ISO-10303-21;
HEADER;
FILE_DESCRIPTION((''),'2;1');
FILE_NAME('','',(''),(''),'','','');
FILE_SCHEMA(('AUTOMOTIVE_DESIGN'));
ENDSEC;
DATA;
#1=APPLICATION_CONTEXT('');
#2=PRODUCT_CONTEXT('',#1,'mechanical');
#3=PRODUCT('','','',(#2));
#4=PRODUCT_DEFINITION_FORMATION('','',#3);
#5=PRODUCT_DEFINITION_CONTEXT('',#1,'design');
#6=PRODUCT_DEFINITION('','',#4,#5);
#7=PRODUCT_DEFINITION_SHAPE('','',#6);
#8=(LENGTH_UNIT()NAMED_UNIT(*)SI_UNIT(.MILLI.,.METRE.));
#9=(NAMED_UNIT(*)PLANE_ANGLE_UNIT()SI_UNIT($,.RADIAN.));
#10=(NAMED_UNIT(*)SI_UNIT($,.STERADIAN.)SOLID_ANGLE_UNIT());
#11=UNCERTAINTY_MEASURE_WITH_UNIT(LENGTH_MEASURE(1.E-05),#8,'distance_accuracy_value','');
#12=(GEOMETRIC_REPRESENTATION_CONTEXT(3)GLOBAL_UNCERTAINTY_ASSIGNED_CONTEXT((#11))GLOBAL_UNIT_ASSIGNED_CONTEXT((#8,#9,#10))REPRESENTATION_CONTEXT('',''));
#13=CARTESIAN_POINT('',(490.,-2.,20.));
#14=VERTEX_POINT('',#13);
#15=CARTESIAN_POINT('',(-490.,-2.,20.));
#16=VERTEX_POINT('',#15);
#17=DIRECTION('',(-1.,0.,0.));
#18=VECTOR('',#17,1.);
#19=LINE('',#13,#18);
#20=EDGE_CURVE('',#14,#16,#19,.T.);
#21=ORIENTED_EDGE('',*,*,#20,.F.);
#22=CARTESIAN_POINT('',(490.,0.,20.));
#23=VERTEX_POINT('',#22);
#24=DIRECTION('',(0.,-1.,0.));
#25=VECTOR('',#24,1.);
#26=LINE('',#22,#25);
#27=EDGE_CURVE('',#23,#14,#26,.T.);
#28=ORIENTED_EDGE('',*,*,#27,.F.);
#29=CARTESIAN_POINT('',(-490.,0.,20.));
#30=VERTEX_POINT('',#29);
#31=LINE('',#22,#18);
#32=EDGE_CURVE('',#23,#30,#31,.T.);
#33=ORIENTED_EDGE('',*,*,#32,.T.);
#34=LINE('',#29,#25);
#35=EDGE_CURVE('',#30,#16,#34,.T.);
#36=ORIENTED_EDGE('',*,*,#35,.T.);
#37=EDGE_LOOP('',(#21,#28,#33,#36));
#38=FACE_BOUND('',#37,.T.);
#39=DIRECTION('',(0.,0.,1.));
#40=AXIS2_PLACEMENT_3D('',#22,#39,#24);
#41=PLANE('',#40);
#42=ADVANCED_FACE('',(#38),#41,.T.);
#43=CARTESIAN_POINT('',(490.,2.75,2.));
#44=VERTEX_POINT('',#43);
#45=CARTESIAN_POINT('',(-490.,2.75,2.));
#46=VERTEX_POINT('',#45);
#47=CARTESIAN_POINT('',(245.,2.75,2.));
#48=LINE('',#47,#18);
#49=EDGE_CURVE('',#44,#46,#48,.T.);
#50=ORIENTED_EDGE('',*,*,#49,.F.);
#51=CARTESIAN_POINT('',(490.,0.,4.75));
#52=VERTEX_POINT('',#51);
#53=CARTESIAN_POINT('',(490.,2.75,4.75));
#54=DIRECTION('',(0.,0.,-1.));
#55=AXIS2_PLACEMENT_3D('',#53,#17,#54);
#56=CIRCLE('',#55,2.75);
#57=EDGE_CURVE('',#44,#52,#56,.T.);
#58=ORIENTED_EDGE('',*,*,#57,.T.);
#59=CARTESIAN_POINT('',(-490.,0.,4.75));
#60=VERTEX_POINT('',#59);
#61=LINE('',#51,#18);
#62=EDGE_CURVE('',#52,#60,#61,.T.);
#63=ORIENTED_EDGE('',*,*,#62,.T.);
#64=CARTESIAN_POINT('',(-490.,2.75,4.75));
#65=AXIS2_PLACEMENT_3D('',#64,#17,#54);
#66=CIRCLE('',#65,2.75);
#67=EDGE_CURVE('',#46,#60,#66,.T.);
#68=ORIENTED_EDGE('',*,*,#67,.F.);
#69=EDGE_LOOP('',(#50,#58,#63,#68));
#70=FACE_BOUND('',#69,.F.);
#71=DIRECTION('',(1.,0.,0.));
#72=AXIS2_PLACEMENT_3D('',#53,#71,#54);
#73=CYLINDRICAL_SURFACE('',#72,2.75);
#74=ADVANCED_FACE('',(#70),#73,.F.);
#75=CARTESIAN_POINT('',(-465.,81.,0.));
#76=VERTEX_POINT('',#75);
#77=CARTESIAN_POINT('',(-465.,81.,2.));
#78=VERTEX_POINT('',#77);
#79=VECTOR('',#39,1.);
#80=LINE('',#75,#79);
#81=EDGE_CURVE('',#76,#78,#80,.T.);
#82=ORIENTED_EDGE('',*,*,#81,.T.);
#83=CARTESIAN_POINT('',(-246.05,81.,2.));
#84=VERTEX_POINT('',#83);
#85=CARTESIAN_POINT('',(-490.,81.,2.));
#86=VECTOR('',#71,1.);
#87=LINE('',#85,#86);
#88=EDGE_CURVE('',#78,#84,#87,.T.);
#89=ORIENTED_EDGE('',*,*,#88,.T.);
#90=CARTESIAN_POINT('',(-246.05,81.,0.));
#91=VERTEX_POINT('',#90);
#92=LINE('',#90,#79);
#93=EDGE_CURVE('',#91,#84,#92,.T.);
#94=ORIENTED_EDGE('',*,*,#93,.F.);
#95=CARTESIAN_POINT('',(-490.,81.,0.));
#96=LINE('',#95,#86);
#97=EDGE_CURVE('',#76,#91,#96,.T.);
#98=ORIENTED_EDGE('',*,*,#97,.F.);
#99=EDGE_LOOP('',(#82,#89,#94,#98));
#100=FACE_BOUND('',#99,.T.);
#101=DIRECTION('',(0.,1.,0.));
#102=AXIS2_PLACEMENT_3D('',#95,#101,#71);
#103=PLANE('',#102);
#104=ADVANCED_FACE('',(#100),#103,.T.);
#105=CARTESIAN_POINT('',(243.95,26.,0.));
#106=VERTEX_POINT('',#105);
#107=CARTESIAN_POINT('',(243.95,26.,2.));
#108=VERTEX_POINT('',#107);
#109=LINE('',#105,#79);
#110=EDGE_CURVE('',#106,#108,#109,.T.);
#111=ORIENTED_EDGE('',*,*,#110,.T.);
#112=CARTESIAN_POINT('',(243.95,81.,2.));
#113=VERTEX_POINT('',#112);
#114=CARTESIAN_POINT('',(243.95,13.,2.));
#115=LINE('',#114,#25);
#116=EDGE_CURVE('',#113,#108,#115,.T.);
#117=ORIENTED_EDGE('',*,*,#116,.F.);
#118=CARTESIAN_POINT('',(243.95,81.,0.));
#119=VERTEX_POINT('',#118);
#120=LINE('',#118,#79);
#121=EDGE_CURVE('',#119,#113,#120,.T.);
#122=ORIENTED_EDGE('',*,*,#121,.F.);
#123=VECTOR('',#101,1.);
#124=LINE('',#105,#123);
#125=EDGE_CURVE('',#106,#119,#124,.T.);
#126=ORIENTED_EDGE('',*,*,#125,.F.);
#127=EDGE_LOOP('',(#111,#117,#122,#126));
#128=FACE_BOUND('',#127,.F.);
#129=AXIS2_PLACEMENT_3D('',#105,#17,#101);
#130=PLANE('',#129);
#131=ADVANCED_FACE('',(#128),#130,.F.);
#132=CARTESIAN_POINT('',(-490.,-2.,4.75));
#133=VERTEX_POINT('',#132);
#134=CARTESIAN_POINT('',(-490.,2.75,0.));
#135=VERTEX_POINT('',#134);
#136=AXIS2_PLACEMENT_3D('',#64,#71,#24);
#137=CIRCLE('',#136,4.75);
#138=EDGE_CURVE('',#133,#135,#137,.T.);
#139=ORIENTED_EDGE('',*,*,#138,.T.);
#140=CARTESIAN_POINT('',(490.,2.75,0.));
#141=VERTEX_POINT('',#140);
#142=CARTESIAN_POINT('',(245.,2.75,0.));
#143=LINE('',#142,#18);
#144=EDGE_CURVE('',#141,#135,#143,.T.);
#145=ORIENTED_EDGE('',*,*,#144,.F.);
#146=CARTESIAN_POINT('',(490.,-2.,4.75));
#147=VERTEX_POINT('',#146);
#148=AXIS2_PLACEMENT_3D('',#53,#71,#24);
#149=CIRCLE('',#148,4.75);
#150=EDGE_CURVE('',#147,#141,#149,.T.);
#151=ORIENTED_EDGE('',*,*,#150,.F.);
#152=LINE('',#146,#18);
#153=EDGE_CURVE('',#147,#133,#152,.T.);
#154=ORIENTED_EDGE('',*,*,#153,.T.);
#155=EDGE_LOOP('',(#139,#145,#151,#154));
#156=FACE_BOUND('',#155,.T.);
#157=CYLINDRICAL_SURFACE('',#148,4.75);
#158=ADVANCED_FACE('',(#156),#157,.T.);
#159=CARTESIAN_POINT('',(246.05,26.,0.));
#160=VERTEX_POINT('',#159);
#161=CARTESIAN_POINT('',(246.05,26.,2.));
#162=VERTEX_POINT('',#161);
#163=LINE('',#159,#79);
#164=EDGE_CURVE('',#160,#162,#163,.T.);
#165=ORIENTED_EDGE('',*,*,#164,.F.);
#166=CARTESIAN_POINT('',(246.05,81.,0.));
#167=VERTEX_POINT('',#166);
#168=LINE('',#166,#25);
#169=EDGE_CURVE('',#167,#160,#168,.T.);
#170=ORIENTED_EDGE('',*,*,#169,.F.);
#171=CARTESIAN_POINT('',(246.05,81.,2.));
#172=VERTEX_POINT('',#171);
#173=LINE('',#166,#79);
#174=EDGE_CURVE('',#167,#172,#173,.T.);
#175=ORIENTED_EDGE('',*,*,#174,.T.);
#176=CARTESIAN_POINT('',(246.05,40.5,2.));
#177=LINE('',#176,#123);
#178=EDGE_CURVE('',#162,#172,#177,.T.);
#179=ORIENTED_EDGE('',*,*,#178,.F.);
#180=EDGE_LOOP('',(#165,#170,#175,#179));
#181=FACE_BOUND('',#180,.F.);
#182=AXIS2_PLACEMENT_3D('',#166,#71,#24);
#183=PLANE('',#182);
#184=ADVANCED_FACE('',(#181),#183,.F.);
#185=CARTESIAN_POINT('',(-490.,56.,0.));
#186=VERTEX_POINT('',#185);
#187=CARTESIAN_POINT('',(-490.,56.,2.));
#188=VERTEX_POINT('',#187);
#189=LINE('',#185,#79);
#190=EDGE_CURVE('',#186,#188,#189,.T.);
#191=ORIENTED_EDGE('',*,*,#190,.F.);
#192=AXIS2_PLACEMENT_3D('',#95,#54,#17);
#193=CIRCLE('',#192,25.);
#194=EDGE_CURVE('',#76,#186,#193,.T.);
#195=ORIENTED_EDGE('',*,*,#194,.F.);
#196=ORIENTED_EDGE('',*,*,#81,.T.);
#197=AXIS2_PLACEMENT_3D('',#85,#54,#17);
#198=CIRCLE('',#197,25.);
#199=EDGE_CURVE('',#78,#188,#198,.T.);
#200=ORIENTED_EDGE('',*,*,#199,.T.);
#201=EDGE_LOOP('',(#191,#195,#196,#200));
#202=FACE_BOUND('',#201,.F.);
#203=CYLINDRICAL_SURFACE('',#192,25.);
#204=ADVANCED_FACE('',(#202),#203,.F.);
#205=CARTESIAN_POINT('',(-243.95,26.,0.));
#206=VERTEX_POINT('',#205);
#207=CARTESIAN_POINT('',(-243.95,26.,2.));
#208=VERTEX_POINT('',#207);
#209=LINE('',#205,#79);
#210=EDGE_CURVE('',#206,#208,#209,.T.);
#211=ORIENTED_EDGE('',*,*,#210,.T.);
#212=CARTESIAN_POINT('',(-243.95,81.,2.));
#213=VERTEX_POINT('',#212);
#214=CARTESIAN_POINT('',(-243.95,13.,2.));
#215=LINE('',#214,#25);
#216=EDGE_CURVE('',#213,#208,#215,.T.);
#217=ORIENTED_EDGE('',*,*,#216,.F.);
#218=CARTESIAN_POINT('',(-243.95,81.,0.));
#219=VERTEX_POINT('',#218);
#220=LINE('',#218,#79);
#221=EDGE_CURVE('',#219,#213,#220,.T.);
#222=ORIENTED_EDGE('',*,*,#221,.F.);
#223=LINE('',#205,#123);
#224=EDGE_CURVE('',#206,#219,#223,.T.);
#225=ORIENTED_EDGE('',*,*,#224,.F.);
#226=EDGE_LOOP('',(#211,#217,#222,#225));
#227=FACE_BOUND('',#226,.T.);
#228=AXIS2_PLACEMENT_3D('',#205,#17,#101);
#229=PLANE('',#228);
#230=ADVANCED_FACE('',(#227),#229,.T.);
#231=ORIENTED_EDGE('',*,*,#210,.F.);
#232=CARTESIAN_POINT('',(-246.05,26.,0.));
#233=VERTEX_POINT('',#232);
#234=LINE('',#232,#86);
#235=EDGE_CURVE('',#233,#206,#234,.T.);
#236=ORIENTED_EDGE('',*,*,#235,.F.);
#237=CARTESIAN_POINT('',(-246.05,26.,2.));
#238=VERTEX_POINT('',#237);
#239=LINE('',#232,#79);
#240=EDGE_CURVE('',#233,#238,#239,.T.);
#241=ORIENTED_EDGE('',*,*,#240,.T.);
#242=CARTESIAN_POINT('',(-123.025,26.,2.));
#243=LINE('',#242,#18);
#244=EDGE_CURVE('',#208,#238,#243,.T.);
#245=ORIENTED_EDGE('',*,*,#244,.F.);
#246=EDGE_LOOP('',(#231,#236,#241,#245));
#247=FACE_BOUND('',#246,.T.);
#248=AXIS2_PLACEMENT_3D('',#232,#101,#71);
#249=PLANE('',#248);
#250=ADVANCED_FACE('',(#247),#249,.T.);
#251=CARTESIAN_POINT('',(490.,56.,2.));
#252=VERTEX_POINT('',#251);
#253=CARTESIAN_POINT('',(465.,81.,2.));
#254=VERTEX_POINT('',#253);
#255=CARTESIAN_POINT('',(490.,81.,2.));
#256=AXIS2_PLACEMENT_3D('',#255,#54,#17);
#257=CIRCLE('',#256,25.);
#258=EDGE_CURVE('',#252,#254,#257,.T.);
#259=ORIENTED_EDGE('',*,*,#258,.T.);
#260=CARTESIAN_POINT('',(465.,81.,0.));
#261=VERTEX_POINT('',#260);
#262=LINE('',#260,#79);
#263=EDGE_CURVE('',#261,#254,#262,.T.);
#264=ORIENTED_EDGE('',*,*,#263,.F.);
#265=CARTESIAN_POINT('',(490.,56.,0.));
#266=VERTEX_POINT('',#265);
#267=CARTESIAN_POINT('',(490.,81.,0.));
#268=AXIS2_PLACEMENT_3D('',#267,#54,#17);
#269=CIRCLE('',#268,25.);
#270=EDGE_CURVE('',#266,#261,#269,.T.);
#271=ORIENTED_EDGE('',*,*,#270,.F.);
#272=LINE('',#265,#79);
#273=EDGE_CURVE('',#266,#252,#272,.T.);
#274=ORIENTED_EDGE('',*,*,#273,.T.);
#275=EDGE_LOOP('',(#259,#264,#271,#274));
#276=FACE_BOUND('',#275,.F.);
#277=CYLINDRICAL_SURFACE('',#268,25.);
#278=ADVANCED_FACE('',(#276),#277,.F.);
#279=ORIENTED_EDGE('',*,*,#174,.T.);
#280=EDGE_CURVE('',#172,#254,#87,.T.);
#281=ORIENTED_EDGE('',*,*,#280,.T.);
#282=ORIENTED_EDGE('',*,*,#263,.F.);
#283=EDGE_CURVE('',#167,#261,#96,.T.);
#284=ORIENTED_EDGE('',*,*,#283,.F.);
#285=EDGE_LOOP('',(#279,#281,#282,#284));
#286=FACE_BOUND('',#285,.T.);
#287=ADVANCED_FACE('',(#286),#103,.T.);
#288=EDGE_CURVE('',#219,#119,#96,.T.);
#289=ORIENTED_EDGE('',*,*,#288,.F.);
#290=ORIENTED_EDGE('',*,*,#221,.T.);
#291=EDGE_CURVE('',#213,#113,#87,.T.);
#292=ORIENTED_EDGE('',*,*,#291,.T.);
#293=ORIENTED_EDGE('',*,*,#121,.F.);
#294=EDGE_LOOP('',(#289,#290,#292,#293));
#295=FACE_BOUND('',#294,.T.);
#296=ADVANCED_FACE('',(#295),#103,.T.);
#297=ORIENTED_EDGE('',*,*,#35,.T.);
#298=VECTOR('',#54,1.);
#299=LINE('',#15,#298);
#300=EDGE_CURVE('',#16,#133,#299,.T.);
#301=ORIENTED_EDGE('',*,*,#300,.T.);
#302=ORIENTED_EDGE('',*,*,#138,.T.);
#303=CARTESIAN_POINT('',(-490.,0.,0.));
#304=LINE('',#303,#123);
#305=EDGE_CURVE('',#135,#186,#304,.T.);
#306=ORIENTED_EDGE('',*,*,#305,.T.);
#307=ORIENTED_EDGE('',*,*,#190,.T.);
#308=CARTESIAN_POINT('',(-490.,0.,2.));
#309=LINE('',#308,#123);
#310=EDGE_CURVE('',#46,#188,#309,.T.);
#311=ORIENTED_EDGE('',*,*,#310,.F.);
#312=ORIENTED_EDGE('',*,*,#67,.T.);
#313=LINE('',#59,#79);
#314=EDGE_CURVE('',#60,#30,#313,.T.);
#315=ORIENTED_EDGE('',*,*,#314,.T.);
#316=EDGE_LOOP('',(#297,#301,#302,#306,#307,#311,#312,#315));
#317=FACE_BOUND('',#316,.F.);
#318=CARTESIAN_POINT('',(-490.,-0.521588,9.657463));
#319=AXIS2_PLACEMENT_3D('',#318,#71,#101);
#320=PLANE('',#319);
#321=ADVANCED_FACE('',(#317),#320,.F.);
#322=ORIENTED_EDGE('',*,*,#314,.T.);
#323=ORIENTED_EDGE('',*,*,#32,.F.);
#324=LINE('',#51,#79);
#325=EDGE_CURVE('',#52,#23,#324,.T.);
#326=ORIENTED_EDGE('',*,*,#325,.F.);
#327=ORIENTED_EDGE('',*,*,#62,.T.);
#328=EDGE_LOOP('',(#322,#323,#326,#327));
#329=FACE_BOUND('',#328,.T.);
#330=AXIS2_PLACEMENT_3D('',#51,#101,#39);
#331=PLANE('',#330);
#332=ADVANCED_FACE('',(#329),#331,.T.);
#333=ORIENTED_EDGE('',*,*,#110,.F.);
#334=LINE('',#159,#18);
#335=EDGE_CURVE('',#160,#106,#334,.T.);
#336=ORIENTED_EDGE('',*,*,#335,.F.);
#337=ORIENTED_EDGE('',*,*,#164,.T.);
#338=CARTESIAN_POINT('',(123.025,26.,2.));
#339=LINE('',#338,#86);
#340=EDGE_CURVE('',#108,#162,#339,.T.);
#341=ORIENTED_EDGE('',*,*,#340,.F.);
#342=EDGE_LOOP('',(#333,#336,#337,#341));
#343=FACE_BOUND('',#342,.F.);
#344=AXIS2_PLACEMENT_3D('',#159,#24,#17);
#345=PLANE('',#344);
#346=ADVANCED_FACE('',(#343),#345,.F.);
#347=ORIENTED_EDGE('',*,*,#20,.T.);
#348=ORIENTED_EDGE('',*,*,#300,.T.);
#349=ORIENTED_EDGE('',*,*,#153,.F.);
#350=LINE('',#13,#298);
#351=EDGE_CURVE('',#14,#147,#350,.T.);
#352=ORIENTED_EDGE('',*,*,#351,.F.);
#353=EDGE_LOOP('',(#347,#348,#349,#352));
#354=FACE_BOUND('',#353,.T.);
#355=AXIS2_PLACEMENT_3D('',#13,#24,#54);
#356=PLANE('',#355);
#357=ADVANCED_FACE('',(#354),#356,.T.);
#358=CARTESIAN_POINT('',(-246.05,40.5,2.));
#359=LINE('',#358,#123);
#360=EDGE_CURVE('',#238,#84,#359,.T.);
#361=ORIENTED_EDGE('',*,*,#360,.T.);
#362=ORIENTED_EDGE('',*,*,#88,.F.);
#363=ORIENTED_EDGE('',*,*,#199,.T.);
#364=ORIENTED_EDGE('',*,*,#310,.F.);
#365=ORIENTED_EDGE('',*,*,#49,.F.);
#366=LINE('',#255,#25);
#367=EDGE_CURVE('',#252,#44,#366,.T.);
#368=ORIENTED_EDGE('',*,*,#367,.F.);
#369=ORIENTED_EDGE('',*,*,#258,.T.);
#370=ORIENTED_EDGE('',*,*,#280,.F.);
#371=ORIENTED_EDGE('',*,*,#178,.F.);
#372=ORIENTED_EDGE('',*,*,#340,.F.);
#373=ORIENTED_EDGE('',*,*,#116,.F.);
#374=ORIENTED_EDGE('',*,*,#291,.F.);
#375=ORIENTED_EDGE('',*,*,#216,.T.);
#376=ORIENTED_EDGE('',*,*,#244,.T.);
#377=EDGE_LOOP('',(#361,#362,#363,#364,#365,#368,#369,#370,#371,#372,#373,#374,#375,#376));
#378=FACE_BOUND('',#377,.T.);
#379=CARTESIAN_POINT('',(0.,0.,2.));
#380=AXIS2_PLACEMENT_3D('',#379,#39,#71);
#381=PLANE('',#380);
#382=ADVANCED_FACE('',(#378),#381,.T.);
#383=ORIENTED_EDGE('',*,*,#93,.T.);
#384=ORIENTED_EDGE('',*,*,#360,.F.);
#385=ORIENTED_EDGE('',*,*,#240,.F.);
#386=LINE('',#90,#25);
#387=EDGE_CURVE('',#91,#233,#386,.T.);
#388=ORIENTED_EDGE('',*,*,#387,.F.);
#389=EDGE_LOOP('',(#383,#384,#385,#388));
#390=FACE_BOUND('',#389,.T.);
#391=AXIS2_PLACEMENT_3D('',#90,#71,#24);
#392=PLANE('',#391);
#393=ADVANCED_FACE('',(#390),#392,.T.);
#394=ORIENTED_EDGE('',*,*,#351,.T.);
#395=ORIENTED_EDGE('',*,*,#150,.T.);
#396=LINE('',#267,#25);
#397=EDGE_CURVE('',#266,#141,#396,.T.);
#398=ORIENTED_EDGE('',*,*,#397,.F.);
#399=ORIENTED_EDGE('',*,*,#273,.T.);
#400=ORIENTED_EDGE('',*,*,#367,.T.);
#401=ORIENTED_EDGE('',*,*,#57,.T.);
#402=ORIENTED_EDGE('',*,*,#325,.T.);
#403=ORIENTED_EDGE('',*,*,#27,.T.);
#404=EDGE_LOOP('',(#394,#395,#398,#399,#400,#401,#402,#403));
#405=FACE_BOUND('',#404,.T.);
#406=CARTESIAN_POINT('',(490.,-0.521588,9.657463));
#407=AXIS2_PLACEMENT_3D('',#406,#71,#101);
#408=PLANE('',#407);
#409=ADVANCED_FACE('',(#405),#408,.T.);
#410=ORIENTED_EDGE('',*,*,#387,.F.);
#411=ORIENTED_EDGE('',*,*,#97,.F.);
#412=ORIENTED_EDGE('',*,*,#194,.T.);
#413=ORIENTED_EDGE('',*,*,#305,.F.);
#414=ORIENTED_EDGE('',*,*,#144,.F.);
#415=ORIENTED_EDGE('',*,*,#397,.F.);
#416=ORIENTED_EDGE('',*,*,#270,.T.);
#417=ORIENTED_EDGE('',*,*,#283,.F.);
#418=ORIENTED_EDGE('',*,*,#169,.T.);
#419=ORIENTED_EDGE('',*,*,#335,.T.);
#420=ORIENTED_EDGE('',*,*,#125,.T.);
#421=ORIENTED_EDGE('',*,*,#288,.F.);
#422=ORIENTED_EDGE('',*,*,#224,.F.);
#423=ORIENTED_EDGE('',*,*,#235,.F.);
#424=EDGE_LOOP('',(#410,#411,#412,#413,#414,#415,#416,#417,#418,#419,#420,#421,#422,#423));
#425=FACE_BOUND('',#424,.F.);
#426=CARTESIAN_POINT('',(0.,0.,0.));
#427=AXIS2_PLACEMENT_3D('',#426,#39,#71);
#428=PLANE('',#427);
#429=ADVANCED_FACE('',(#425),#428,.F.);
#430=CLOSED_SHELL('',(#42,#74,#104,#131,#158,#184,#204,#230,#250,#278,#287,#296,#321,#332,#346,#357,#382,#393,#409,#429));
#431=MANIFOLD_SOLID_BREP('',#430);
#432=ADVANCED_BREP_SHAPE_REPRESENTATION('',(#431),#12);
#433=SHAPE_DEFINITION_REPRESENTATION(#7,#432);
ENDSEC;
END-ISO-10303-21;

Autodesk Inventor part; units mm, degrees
ref_plane "YZ Plane" through (0, 0, 0) normal (1, 0, 0) x (0, 1, 0)
ref_plane "XZ Plane" through (0, 0, 0) normal (0, 1, 0) x (-1, 0, 0)
ref_plane "XY Plane" through (0, 0, 0) normal (0, 0, 1) x (1, 0, 0)
sketch "Sketch1" plane through (0, 0, 0) normal (0, 0, 1) x (1, 0, 0)
  line L0 (-490, 81) -> (490, 81)
  line L1 (490, 81) -> (490, 0)
  line L2 (490, 0) -> (-490, 0)
  line L3 (-490, 0) -> (-490, 81)
  point P0 (0, 0)
  point P1 (0, 0)
  dimension "d0" = 980
  dimension "d1" = 81
extrude "Plate1" add sketch "Sketch1" along normal blind 2
sketch "Sketch2" plane through (490, -2, 0) normal (0, 1, 0) x (-1, 0, 0)
  line L0 (980, 0) -> (0, 0)
  line L1 (0, 0) -> (0, 20)
  line L2 (0, 20) -> (980, 20)
  line L3 (980, 20) -> (980, 0)
edge flange "Flange1" height 20 angle 90 thickness 2 bend radius 2.75 thickness toward (0, 1, 0) relief round relief width 2 relief depth 1 edges at (0, 0, 2) wall of the first edge with corners at (-490, -2, 0) (490, -2, 0) (490, -2, 20) (-490, -2, 20)
bend "Bend1"
corner "Corner1"
sketch "Sketch5" plane through (0, 0, 0) normal (0, 0, -1) x (-1, 0, 0)
  line L0 (490, 81) -> (-490, 81) projected
  line L1 (490, -2) -> (-490, -2) projected
  circle A0 centre (0, 81) radius 25
  line L2 (243.95, 81) -> (246.05, 81)
  line L3 (246.05, 81) -> (246.05, 26)
  line L4 (246.05, 26) -> (243.95, 26)
  line L5 (243.95, 26) -> (243.95, 81)
  line L6 (-243.95, 81) -> (-246.05, 81)
  line L7 (-246.05, 81) -> (-246.05, 26)
  line L8 (-246.05, 26) -> (-243.95, 26)
  line L9 (-243.95, 26) -> (-243.95, 81)
  line L10 (0, 81) -> (0, -2) construction
  line L11 (-490, -2) -> (-490, 81)
  line L12 (490, -2) -> (490, 81)
  circle A1 centre (-490, 81) radius 25
  circle A2 centre (490, 81) radius 25
  point P0 (0, 0)
  point P1 (245, 26)
  point P2 (-245, 26)
  point P3 (246.05, 81)
  point P4 (-25, 81)
  point P5 (25, 81)
  point P6 (-246.05, 81)
  point P7 (465, 81)
  point P8 (490, 56)
  point P9 (-490, 56)
  point P10 (-465, 81)
  dimension "d45" = 50
  dimension "d48" = 2.1
  dimension "d49" = 490
  dimension "d51" = 28
  dimension "d52" = 55
extrude "Extrusion1" cut sketch "Sketch5" against normal through all contours L3 L4 L5 L0 | L0 L12 A2 | L9 L8 L7 L0 | L11 L0 A1 picked at (488.1457, 64.5423) picked at (-481.1886, 66.9767)
sketch "Sketch9" plane through (0, 0, 2) normal (0, 0, 1) x (1, 0, 0)
  line L0 (467.0539, 27.7998) -> (467.0539, 15.7998) construction
  line L1 (467.0539, 15.7998) -> (267.0539, 15.7998) construction
  line L2 (267.0539, 15.7998) -> (267.0539, 27.7998) construction
  line L3 (267.0539, 27.7998) -> (467.0539, 27.7998) construction
  line L4 (-490, 81) -> (490, 81) projected
  point P0 (0, 0)
  point P1 (1.05, 68)
  point P2 (490, 81)
  point P3 (-490, 81)
  dimension "d40" = 200
  dimension "d41" = 12
mark "Mark2"
equation "\"d2\" = Thickness"
equation "\"d3\" = BendReliefWidth"
equation "\"d4\" = BendReliefDepth"
equation "\"d5\" = MinimumRemnant"
equation "\"d6\" = TransitionRadius"
equation "\"d9\" = BendRadius"
equation "\"d10\" = CornerReliefSize"
equation "\"d11\" = GapSize"
equation "\"d12\" = JacobiRadiusSize"
equation "\"BendReliefWidth\" = Thickness"
equation "\"BendReliefDepth\" = 0.5 * Thickness"
equation "\"CornerReliefSize\" = 4 * Thickness"
equation "\"MinimumRemnant\" = 2 * Thickness"
equation "\"TransitionRadius\" = BendRadius"
equation "\"JacobiRadiusSize\" = BendRadius"
equation "\"GapSize\" = Thickness"
equation "\"Thickness\" = 2"
equation "\"BendRadius\" = 2.75"
properties part number "MSC 331 STRINGER BOARD  ####" material "Stainless Steel"
